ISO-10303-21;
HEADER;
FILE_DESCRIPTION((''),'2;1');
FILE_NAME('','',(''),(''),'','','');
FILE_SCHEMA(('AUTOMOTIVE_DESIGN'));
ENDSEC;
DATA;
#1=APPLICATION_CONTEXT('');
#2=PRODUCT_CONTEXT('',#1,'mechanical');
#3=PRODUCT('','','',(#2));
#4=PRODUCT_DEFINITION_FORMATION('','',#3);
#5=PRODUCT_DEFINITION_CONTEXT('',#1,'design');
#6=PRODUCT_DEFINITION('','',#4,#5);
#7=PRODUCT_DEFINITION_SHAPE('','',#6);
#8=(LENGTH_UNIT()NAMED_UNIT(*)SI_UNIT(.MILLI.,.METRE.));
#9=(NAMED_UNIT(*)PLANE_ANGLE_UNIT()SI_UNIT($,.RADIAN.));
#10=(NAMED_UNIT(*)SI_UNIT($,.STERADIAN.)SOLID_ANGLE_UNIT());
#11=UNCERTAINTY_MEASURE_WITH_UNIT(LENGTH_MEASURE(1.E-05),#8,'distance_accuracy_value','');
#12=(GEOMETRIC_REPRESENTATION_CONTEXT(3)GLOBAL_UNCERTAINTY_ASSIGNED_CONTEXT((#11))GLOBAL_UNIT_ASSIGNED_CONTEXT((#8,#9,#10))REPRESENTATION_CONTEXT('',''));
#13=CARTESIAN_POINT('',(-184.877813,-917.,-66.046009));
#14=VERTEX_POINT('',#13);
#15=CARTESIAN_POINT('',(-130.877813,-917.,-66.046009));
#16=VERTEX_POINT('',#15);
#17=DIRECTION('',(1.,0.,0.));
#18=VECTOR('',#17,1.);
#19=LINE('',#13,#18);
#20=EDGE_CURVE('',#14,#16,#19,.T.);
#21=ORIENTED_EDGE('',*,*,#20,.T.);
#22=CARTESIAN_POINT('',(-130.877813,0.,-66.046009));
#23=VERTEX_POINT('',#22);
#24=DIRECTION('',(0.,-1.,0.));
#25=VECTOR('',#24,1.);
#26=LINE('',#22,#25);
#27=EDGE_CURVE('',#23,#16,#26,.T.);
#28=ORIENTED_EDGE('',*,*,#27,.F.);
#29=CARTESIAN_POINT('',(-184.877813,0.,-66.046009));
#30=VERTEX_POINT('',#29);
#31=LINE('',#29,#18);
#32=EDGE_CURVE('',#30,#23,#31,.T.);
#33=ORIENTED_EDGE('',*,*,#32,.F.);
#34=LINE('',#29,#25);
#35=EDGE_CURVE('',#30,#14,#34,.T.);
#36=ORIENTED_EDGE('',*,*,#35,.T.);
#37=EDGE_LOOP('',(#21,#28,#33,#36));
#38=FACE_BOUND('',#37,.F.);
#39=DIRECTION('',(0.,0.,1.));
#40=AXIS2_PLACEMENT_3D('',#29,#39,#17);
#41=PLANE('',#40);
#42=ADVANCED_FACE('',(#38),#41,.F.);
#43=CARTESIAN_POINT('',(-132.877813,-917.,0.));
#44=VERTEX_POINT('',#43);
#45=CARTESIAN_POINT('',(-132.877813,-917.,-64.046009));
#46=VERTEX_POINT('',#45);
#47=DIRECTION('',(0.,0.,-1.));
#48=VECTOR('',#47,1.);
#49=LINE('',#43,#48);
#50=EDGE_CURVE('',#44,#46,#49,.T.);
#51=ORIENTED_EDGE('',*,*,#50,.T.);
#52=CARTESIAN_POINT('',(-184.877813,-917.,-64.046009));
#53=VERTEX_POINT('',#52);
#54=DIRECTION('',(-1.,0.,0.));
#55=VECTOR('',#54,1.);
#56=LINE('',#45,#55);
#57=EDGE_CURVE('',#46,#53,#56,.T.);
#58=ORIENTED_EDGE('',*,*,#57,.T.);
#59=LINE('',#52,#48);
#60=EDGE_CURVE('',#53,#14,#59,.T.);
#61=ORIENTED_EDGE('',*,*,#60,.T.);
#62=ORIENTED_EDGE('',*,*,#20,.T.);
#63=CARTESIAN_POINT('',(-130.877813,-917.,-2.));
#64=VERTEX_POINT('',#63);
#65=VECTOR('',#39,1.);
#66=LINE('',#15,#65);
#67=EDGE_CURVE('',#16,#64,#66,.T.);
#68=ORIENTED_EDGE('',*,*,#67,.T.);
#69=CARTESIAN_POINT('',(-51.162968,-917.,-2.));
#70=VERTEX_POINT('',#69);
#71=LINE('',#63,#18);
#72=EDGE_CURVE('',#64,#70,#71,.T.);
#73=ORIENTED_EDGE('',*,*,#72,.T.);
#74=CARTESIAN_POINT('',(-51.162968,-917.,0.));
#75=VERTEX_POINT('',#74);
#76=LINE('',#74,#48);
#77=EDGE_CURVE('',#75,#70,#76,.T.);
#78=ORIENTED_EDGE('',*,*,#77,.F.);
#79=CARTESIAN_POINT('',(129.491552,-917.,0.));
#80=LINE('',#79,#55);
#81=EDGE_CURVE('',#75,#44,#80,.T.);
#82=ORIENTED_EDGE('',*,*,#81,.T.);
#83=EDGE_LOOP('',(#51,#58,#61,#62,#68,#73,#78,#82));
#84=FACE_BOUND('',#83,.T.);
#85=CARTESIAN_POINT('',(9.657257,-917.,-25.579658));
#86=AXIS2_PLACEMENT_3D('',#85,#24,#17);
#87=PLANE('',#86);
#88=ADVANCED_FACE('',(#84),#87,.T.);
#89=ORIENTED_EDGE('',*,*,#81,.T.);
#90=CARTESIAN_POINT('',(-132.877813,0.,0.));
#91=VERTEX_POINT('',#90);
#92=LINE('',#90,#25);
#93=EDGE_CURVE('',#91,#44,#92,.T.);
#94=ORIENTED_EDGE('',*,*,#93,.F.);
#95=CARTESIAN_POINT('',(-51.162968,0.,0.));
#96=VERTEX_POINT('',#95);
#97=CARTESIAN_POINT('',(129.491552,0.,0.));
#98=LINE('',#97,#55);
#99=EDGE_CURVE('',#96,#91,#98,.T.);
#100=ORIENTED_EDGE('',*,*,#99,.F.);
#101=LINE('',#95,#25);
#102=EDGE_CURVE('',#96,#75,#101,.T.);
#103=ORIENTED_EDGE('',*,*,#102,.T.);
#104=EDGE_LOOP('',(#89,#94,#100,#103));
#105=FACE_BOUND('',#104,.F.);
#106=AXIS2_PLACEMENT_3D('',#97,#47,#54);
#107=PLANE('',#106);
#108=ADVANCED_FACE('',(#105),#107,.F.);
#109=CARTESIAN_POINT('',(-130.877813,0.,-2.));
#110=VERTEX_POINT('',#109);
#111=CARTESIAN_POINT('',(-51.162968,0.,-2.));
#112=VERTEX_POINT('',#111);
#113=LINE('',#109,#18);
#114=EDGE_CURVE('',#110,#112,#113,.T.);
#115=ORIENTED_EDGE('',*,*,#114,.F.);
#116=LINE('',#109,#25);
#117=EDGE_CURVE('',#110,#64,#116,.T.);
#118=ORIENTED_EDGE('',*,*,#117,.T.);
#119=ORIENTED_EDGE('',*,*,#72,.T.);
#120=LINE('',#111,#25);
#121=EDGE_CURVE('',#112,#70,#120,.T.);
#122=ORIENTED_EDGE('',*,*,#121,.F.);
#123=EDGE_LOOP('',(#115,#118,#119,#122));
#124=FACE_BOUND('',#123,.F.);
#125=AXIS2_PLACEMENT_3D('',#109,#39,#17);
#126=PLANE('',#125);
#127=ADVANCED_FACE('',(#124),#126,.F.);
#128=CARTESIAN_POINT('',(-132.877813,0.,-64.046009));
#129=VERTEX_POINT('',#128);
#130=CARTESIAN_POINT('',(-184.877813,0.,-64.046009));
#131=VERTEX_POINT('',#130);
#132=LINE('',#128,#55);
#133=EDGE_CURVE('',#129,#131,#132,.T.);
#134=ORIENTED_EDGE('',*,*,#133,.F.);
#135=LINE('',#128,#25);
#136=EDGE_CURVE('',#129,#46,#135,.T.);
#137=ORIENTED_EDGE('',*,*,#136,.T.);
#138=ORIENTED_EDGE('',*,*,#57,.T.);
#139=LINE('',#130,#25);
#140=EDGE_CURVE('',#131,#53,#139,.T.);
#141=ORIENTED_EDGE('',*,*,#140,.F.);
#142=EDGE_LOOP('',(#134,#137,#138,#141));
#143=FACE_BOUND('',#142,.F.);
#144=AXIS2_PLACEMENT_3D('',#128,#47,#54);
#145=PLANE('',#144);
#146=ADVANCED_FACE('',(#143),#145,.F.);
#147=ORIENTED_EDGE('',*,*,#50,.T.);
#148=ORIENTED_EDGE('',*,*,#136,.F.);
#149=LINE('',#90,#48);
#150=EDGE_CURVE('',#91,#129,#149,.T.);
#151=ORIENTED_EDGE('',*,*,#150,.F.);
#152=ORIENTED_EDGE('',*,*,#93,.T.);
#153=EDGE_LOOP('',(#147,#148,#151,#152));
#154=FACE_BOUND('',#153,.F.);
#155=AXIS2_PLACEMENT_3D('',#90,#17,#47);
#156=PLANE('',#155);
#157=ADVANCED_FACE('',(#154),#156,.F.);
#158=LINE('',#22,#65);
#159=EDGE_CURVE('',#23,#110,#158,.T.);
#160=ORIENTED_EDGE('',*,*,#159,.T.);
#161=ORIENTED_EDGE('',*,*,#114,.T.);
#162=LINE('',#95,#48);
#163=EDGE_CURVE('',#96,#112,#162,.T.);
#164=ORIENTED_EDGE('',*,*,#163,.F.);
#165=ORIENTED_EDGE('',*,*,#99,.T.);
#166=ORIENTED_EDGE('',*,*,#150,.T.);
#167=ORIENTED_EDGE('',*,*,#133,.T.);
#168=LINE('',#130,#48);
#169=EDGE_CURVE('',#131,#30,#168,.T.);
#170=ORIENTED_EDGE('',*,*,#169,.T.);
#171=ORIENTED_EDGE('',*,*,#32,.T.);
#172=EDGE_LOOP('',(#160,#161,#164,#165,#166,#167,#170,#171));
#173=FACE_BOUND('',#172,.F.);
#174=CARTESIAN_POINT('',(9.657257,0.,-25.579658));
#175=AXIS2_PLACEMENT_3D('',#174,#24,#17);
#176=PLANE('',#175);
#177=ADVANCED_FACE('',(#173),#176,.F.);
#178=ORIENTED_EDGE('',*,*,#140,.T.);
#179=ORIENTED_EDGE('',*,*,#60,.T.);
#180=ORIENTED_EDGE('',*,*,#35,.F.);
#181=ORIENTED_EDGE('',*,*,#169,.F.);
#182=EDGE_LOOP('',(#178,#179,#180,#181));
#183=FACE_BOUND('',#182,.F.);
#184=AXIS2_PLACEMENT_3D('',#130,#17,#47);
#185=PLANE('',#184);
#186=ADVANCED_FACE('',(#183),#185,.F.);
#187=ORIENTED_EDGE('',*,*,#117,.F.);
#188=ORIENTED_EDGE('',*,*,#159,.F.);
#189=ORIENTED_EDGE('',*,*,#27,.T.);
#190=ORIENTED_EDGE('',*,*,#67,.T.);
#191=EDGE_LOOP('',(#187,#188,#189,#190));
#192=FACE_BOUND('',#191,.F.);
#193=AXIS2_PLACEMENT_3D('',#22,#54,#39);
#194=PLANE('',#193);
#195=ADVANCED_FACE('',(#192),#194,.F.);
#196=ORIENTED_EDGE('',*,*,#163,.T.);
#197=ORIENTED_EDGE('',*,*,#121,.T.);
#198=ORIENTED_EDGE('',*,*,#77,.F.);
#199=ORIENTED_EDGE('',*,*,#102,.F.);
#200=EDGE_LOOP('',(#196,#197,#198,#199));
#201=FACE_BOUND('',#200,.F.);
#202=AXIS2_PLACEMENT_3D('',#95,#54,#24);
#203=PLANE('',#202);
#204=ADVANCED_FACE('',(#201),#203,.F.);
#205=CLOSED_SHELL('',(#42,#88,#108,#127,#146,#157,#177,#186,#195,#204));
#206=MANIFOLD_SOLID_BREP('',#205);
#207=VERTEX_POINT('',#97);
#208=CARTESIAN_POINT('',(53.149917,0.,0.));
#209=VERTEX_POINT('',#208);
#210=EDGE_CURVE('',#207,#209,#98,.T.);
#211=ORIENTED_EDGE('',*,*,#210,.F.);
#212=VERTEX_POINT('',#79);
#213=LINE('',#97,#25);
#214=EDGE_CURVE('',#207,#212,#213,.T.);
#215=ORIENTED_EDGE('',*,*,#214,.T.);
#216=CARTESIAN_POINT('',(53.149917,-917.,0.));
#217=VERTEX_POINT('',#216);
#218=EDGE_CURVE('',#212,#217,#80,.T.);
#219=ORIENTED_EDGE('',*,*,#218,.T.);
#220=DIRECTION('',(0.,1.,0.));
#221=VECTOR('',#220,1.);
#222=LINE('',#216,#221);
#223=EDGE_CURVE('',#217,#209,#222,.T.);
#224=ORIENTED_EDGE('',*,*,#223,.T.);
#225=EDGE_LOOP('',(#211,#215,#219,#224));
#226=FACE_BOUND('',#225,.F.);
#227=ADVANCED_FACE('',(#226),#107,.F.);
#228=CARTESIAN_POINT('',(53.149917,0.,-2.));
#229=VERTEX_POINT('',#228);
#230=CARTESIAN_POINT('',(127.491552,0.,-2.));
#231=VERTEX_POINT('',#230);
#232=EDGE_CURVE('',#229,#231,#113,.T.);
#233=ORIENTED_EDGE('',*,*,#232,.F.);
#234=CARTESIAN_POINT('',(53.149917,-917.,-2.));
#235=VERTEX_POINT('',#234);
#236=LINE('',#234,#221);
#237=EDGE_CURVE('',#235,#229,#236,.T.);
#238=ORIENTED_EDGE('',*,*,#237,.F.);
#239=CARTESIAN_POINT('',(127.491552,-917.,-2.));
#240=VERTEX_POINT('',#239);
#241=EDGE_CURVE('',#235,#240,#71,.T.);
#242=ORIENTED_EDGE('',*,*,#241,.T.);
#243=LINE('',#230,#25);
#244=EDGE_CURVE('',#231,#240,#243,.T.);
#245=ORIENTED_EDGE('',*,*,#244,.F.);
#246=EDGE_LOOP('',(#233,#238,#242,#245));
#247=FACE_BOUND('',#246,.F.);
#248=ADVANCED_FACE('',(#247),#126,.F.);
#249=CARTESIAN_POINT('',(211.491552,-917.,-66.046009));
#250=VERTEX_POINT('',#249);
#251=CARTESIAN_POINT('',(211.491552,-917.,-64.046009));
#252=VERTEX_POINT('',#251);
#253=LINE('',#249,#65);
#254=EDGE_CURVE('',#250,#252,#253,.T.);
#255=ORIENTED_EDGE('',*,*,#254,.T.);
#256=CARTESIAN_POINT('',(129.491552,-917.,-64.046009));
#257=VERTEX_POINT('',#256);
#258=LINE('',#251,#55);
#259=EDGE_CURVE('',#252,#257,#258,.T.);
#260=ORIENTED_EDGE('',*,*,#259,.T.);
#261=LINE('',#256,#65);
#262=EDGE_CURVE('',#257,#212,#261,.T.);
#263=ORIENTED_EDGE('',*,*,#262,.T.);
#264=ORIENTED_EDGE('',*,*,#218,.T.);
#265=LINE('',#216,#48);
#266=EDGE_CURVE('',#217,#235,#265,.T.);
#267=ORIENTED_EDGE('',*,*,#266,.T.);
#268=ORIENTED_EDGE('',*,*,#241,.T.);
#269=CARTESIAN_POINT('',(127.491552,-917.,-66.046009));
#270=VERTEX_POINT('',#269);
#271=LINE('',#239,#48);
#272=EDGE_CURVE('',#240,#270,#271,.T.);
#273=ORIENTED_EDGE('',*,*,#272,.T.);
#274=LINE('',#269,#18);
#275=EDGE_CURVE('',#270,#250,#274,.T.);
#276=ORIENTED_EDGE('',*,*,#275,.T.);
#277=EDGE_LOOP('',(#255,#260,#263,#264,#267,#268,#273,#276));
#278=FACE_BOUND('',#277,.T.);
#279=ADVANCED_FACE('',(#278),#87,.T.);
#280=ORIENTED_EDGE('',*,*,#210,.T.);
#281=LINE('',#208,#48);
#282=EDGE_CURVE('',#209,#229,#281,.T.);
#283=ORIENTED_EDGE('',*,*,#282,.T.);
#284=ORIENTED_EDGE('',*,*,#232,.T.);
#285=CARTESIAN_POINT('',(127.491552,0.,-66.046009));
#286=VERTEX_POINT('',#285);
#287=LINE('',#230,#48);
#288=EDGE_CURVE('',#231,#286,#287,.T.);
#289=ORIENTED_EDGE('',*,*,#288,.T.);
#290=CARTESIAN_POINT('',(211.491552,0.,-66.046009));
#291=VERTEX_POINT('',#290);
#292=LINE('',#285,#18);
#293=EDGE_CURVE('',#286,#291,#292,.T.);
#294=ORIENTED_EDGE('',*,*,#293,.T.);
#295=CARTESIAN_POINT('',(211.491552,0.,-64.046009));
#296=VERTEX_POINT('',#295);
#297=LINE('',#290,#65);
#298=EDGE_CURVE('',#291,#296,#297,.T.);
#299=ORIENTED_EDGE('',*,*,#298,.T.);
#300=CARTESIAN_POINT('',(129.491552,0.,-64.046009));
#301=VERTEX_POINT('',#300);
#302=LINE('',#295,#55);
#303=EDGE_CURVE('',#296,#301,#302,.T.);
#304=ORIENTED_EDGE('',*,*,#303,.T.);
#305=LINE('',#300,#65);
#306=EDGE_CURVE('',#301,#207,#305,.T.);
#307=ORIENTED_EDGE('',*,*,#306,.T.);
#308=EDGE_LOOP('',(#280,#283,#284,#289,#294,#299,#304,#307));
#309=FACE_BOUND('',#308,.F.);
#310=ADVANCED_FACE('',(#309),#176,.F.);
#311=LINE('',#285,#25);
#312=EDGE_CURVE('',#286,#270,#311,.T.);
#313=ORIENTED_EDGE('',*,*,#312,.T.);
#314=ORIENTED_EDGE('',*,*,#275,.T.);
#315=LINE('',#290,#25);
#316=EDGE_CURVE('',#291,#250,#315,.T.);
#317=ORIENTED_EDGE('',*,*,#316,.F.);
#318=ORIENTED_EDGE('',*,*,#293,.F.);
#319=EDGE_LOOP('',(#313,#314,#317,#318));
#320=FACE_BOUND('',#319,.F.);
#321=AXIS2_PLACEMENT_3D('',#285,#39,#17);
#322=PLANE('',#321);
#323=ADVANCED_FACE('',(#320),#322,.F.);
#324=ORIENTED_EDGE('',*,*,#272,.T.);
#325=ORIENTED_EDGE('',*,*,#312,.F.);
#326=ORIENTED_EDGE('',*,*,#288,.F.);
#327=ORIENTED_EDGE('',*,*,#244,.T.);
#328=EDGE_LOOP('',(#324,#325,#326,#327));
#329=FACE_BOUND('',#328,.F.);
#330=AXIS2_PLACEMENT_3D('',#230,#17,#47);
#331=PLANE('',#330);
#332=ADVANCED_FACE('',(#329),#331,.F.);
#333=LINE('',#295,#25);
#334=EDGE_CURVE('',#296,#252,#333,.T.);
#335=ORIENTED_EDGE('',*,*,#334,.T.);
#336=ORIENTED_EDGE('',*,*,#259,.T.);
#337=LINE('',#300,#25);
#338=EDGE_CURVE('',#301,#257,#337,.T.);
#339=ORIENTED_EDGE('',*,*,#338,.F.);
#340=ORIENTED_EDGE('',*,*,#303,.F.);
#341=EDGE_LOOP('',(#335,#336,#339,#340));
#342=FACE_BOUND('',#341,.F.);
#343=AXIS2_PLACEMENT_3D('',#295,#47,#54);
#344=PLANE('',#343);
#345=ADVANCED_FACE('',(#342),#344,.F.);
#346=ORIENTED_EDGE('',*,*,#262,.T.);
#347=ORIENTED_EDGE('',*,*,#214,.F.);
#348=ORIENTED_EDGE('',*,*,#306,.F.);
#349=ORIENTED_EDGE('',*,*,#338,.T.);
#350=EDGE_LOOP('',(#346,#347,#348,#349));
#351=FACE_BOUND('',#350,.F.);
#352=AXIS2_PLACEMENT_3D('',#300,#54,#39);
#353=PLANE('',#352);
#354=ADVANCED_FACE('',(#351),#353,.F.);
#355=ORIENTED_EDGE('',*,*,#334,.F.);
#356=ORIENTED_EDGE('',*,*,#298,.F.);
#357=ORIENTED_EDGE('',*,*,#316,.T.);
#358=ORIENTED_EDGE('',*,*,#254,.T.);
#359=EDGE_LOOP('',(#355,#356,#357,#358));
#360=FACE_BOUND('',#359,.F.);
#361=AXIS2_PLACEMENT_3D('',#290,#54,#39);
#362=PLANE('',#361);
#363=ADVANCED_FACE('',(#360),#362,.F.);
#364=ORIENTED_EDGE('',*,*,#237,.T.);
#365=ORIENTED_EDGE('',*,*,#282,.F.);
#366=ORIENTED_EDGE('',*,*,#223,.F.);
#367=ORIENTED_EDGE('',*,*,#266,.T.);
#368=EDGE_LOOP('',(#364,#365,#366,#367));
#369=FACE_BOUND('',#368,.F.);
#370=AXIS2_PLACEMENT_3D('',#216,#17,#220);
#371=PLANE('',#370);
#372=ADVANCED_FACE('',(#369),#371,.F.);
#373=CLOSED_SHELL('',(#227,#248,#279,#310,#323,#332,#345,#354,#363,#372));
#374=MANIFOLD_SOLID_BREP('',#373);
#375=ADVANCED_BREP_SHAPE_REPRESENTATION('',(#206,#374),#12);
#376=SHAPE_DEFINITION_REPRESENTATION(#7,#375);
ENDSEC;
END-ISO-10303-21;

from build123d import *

# Parameters (mm, degrees)
F1_DEPTH = 917
F3_DEPTH = 2


# Not quite as in the source:
# - a feature names something its author has since deleted; it is built from what else it names


with BuildPart() as f1:
    # F0 (on Front) → F1 (new body)
    with BuildSketch(Plane.XZ):
        Polygon((133.3621336615, -66.0460090514), (211.4915523357, -66.0460090514), (211.4915523357, -64.0460090514), (129.4915523357, -64.0460090514), (129.4915523357, 0), (-132.8778128425, 0), (-132.8778128425, -64.0460090514), (-184.8778128425, -64.0460090514), (-184.8778128425, -66.0460090514), (-133.3621336615, -66.0460090514), (-130.8778128425, -66.0460090514), (-130.8778128425, -2), (127.4915523357, -2), (127.4915523357, -66.0460090514), align=None)
    extrude(amount=F1_DEPTH)

    # F2 (on Top) → F3 (cut)
    with BuildSketch(Plane.XY):
        Polygon((53.1499173463, 0), (-51.1629678309, 0), (-51.1629678309, -190.4399693012), (-51.1629678309, -198.6912098614), (-51.1629678309, -718.3087901386), (-51.1629678309, -917), (53.1499173463, -917), (53.1499173463, -718.3087901386), (53.1499173463, -198.6912098614), align=None)
    extrude(amount=-F3_DEPTH, mode=Mode.SUBTRACT)


solid = f1.part
